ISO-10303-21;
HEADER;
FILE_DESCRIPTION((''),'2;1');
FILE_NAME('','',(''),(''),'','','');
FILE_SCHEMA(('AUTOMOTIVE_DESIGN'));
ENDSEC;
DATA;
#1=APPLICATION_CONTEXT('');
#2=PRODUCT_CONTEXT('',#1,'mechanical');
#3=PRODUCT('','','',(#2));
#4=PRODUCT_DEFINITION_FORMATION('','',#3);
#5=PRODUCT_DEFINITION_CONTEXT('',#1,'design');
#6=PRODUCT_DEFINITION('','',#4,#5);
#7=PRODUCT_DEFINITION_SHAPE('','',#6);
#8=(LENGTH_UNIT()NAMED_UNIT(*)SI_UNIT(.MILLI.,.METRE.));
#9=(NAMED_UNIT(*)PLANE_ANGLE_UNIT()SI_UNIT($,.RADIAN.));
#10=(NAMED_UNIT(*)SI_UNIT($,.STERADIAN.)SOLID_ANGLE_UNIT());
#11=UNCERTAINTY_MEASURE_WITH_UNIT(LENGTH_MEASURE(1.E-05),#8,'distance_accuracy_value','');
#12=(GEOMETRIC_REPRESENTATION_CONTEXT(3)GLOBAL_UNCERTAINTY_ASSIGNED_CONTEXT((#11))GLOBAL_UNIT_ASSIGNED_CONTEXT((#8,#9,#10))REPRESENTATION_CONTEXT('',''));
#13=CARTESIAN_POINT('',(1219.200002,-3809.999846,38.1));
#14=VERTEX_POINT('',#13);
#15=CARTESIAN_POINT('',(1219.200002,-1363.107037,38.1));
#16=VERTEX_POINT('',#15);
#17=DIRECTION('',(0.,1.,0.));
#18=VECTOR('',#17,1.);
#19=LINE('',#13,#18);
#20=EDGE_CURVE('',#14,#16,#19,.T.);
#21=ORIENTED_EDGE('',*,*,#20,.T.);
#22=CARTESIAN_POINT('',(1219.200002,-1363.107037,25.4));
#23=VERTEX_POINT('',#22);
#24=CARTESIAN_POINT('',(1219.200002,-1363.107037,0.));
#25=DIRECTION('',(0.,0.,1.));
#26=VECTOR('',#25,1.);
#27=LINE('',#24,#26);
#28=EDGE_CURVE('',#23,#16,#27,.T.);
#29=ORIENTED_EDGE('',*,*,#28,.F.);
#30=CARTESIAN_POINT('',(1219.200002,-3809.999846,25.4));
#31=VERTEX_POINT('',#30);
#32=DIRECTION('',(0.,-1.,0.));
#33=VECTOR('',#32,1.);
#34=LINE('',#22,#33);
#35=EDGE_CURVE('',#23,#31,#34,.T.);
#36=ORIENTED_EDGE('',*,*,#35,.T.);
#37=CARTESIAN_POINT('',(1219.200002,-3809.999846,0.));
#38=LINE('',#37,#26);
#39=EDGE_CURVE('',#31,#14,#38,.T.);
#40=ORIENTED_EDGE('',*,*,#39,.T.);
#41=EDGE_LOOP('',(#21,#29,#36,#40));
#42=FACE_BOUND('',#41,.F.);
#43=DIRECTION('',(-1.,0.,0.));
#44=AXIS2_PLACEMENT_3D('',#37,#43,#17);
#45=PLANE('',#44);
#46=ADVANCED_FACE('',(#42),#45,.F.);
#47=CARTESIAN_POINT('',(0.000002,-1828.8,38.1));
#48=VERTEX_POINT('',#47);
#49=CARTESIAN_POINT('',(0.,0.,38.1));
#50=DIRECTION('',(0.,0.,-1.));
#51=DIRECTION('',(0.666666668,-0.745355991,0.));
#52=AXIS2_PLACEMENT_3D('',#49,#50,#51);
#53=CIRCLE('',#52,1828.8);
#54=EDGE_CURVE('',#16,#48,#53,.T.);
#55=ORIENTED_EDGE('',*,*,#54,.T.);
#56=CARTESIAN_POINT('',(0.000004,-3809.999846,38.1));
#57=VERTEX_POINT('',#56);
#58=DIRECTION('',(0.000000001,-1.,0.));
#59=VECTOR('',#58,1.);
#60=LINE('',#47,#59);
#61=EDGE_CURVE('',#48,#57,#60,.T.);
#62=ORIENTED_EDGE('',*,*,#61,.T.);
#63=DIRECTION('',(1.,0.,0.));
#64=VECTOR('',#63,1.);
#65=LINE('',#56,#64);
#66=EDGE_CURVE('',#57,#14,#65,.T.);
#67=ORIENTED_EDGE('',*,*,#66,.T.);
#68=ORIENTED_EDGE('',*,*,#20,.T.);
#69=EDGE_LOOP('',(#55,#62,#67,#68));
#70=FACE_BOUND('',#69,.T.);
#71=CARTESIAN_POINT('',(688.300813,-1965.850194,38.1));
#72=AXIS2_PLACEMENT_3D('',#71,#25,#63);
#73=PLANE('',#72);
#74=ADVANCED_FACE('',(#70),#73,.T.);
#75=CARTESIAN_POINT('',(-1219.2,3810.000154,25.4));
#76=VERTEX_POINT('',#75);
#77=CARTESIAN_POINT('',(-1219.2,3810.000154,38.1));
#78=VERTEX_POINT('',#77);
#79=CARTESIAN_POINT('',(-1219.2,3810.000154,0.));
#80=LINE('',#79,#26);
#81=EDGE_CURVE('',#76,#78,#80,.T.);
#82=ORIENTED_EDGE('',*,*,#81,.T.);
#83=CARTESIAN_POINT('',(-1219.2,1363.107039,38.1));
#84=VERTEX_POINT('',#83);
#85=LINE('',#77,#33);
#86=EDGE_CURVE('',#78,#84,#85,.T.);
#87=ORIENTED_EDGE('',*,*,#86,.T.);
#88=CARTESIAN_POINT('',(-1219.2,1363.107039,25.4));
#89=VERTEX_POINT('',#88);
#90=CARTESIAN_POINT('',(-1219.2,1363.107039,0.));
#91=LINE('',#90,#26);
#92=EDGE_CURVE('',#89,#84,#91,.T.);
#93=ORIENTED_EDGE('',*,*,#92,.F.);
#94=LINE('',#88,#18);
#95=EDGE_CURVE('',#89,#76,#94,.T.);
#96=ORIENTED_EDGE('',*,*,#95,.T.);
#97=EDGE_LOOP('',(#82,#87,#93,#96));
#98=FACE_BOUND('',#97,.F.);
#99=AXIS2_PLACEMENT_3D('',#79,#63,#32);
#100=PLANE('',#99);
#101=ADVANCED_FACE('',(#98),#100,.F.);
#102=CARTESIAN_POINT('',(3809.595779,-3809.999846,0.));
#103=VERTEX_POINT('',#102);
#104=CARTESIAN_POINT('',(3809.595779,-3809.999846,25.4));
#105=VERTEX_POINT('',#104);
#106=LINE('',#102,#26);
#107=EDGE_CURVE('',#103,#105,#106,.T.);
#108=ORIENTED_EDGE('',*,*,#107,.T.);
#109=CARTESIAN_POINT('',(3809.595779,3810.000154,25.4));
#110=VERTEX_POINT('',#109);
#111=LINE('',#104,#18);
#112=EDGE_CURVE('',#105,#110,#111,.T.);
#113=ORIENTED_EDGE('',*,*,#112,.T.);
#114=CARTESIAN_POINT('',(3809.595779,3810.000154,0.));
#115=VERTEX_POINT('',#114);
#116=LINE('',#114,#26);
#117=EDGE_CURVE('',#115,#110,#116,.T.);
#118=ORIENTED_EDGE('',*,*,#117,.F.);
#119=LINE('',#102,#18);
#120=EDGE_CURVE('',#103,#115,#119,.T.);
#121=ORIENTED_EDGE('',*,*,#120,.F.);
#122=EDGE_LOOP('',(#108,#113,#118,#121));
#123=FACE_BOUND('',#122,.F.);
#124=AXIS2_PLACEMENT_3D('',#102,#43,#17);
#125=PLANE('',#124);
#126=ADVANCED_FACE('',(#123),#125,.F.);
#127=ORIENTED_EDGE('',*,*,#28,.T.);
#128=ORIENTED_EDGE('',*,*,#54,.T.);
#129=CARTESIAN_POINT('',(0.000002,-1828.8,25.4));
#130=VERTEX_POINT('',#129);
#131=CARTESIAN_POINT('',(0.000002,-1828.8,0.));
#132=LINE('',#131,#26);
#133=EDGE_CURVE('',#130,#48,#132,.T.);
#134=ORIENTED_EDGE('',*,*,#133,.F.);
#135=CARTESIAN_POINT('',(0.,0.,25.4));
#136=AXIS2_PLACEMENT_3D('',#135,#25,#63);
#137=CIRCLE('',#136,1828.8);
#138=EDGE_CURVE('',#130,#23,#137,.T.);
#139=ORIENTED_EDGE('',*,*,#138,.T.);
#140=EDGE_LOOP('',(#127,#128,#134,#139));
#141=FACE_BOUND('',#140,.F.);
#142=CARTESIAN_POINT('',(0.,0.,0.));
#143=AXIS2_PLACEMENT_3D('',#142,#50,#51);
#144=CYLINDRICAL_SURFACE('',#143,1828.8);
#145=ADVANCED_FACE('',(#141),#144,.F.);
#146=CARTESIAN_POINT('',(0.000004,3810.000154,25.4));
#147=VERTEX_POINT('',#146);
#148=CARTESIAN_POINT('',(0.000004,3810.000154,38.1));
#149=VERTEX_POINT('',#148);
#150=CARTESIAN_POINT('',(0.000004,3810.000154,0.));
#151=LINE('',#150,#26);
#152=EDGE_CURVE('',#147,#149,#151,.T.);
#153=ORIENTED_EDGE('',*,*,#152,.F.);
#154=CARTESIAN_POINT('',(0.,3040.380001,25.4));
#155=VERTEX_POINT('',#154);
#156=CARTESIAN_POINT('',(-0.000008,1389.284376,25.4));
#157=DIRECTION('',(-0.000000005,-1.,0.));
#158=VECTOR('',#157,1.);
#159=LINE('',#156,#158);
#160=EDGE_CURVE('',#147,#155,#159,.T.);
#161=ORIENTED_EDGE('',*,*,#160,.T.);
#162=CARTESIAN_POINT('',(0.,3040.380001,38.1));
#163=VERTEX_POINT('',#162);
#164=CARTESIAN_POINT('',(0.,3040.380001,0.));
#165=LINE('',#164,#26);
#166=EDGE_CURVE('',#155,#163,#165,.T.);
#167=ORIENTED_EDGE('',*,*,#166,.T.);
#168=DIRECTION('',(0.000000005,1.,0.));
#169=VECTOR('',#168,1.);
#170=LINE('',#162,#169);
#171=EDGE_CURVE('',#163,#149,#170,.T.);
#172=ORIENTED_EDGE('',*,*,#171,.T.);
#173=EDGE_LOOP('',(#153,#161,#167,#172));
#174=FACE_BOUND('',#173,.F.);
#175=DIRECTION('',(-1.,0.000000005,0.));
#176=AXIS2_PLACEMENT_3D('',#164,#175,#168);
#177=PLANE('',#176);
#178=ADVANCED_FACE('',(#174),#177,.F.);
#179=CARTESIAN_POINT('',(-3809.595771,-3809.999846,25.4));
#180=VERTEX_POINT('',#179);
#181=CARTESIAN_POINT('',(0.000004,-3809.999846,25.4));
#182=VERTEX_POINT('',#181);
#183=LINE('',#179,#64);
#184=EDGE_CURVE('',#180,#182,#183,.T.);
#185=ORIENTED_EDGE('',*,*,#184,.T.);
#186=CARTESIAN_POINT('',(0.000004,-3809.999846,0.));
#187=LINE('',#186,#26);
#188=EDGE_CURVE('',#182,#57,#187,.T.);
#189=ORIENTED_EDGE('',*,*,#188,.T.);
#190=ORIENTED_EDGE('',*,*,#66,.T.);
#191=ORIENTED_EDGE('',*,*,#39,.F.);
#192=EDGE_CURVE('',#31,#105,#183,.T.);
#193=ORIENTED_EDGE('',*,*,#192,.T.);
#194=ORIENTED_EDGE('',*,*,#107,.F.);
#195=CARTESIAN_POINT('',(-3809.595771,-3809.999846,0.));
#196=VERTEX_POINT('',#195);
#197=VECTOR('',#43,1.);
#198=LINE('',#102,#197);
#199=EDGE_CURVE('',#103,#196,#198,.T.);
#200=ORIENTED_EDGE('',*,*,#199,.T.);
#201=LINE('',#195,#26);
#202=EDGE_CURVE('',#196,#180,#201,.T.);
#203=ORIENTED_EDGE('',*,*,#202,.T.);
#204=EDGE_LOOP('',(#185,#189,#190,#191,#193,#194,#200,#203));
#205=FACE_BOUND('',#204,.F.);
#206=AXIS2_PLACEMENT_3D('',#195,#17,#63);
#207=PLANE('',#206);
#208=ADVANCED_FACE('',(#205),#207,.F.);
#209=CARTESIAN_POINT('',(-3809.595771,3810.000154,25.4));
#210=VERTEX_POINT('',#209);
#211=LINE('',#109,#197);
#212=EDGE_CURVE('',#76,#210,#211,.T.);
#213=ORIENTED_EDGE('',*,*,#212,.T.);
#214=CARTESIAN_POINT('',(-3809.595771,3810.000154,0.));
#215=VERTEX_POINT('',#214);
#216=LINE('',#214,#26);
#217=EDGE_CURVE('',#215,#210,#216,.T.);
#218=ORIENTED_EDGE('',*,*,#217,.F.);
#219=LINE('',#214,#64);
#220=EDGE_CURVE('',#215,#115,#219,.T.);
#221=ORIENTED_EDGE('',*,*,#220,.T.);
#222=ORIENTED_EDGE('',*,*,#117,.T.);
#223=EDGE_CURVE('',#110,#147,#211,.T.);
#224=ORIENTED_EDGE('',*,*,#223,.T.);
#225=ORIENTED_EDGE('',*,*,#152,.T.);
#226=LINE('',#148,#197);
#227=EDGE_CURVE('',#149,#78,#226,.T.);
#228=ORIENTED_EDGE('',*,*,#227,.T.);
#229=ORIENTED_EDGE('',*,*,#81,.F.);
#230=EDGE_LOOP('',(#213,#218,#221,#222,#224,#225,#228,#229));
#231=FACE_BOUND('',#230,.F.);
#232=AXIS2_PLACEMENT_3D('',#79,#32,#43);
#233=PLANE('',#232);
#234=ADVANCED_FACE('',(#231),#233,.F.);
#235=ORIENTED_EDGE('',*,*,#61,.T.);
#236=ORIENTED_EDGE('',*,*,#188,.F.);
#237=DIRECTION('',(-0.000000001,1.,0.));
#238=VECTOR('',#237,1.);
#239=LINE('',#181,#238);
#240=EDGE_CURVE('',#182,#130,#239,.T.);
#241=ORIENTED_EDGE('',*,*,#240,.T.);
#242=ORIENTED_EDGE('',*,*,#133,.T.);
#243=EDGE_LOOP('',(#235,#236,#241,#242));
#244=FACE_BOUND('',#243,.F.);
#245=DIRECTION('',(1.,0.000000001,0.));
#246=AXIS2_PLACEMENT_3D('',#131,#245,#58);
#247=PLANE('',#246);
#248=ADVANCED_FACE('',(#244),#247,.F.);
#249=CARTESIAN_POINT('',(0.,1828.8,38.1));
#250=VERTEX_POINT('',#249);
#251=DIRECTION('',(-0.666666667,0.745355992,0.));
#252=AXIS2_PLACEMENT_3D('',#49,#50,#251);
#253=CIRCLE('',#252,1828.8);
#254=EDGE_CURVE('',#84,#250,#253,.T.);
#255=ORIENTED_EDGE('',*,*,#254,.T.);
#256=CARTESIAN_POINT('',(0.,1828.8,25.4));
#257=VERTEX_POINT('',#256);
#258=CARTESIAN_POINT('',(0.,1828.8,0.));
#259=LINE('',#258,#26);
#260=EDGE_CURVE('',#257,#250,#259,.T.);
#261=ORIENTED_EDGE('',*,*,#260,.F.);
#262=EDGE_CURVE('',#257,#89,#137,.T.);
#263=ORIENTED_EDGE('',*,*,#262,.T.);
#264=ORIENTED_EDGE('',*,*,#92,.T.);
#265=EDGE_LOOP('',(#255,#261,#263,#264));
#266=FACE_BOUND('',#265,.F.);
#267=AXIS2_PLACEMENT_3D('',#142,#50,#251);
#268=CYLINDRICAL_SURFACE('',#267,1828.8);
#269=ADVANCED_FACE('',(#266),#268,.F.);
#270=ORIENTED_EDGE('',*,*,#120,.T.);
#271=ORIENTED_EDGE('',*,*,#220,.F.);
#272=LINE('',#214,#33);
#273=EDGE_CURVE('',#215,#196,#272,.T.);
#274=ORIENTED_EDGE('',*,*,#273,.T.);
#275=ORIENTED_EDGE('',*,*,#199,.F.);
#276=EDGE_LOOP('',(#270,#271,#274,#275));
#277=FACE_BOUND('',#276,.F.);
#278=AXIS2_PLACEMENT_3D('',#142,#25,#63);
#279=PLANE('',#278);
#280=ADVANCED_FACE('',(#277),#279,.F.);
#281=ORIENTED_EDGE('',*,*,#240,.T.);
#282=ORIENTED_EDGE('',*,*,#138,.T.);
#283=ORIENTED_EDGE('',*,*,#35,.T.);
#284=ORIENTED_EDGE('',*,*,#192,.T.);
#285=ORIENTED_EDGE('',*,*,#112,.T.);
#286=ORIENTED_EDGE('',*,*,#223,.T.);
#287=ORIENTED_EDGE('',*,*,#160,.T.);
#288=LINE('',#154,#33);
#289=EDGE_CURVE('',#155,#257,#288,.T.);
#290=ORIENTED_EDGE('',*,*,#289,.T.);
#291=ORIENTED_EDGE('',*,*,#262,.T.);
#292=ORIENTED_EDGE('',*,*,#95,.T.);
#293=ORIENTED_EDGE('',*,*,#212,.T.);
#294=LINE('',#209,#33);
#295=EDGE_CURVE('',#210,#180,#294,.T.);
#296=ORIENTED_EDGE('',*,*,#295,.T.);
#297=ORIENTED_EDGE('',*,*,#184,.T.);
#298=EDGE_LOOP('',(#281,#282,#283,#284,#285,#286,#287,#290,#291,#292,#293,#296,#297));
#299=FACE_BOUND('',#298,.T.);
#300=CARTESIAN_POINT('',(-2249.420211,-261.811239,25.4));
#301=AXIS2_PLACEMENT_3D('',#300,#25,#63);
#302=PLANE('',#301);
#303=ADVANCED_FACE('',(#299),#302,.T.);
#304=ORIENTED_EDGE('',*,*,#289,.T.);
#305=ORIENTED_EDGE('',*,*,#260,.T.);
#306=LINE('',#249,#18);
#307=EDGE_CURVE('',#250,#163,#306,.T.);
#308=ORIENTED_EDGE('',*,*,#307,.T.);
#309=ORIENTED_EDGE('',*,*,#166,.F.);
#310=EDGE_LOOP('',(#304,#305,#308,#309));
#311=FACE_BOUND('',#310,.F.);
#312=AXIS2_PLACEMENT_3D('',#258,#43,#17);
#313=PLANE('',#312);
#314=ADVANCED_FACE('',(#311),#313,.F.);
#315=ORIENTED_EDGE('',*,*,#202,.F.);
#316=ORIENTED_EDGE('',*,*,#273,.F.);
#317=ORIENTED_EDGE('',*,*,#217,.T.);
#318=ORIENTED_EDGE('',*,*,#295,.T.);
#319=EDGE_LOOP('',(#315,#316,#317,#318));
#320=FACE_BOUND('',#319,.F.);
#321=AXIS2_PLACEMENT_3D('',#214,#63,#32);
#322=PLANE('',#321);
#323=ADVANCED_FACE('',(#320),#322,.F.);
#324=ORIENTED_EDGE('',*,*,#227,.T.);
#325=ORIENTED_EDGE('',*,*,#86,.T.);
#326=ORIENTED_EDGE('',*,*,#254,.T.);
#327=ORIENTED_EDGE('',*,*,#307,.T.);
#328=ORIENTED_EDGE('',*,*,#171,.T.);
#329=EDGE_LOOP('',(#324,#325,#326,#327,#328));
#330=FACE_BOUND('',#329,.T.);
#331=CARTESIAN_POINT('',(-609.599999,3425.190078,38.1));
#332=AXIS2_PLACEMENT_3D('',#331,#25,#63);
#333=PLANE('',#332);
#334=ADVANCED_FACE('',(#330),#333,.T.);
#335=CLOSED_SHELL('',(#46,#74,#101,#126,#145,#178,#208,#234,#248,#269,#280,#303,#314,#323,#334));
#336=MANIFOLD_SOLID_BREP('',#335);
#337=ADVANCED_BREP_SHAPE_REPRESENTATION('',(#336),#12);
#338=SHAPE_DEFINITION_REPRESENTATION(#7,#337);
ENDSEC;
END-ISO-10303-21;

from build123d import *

# Parameters (mm, degrees)
F0_R     = 1790.7
F1_DEPTH = 25.4
F3_DEPTH = 25.4
F4_DEPTH = 25.4
F5_DEPTH = 38.1


# Not quite as in the source:
# - the program builds the solid bodies; features that only make, move or delete a surface that nothing else refers to are left out


with BuildPart() as f1:
    # F0 (on Top) → F1 (new body)
    with BuildSketch(Plane.XY):
        with BuildLine():
            Line((-1219.2, 3810.0001542995), (-3809.5957711624, 3810.0001542995))
            Line((-3809.5957711624, 3810.0001542995), (-3809.5957711624, -3809.9998457005))
            Line((-3809.5957711624, -3809.9998457005), (3.7253e-06, -3809.9998457005))
            Line((3.7253e-06, -3809.9998457005), (3.0473e-06, -3116.5800094754))
            Line((3.0473e-06, -3116.5800094754), (2.2873e-06, -2339.3399715424))
            Line((2.2873e-06, -2339.3399715424), (1.7881e-06, -1828.8))
            ThreePointArc((1.7881e-06, -1828.8), (-1708.414409752, -652.5562386122), (-1219.2, 1363.1070390839))
            Line((-1219.2, 1363.1070390839), (-1219.2, 2247.9000093898))
            Line((-1219.2, 2247.9000093898), (-1219.2, 3040.3800010681))
            Line((-1219.2, 3040.3800010681), (-1219.2, 3810.0001542995))
        make_face()
        with BuildLine():
            Line((3809.595778613, 3810.0001542995), (3.7253e-06, 3810.0001542995))
            Line((3.7253e-06, 3810.0001542995), (0, 3040.3800010681))
            Line((0, 3040.3800010681), (0, 2247.9000081977))
            Line((0, 2247.9000081977), (0, 1828.8))
            ThreePointArc((0, 1828.8), (1293.156881434, 1293.156881434), (1828.8, 0))
            ThreePointArc((1828.8, 0), (1669.4583559266, -746.6044721449), (1219.2000023767, -1363.1070369581))
            Line((1219.2000023767, -1363.1070369581), (1219.2000023767, -2339.3399703503))
            Line((1219.2000023767, -2339.3399703503), (1219.2000023767, -3116.5800082833))
            Line((1219.2000023767, -3116.5800082833), (1219.2000023767, -3809.9998457005))
            Line((1219.2000023767, -3809.9998457005), (3809.595778613, -3809.9998457005))
            Line((3809.595778613, -3809.9998457005), (3809.595778613, 3810.0001542995))
        make_face()
        with BuildLine():
            ThreePointArc((0, 1828.8), (-652.556237777, 1708.414410071), (-1219.2, 1363.1070390839))
            ThreePointArc((-1219.2, 1363.1070390839), (-1708.414409752, -652.5562386122), (1.7881e-06, -1828.8))
            ThreePointArc((1.7881e-06, -1828.8), (652.5562401017, -1708.4144091831), (1219.2000023767, -1363.1070369581))
            ThreePointArc((1219.2000023767, -1363.1070369581), (1669.4583559266, -746.6044721449), (1828.8, 0))
            ThreePointArc((1828.8, 0), (1293.156881434, 1293.156881434), (0, 1828.8))
        make_face()
        Circle(F0_R, mode=Mode.SUBTRACT)
    extrude(amount=F1_DEPTH)

    # F0 (on Top) → F3 (join)
    with BuildSketch(Plane.XY):
        with BuildLine():
            Line((-1219.2, 3810.0001542995), (-3809.5957711624, 3810.0001542995))
            Line((-3809.5957711624, 3810.0001542995), (-3809.5957711624, -3809.9998457005))
            Line((-3809.5957711624, -3809.9998457005), (3.7253e-06, -3809.9998457005))
            Line((3.7253e-06, -3809.9998457005), (3.0473e-06, -3116.5800094754))
            Line((3.0473e-06, -3116.5800094754), (2.2873e-06, -2339.3399715424))
            Line((2.2873e-06, -2339.3399715424), (1.7881e-06, -1828.8))
            ThreePointArc((1.7881e-06, -1828.8), (-1708.414409752, -652.5562386122), (-1219.2, 1363.1070390839))
            Line((-1219.2, 1363.1070390839), (-1219.2, 2247.9000093898))
            Line((-1219.2, 2247.9000093898), (-1219.2, 3040.3800010681))
            Line((-1219.2, 3040.3800010681), (-1219.2, 3810.0001542995))
        make_face()
        Polygon((3.7253e-06, 3810.0001542995), (-1219.2, 3810.0001542995), (-1219.2, 3040.3800010681), (0, 3040.3800010681), align=None)
        with BuildLine():
            Line((3809.595778613, 3810.0001542995), (3.7253e-06, 3810.0001542995))
            Line((3.7253e-06, 3810.0001542995), (0, 3040.3800010681))
            Line((0, 3040.3800010681), (0, 2247.9000081977))
            Line((0, 2247.9000081977), (0, 1828.8))
            ThreePointArc((0, 1828.8), (1293.156881434, 1293.156881434), (1828.8, 0))
            ThreePointArc((1828.8, 0), (1669.4583559266, -746.6044721449), (1219.2000023767, -1363.1070369581))
            Line((1219.2000023767, -1363.1070369581), (1219.2000023767, -2339.3399703503))
            Line((1219.2000023767, -2339.3399703503), (1219.2000023767, -3116.5800082833))
            Line((1219.2000023767, -3116.5800082833), (1219.2000023767, -3809.9998457005))
            Line((1219.2000023767, -3809.9998457005), (3809.595778613, -3809.9998457005))
            Line((3809.595778613, -3809.9998457005), (3809.595778613, 3810.0001542995))
        make_face()
        Polygon((3.0473e-06, -3116.5800094754), (3.7253e-06, -3809.9998457005), (1219.2000023767, -3809.9998457005), (1219.2000023767, -3116.5800082833), align=None)
    extrude(amount=F3_DEPTH)

    # F0 (on Top) → F4 (join)
    with BuildSketch(Plane.XY):
        Circle(F0_R)
    extrude(amount=F4_DEPTH)

    # F0 (on Top) → F5 (join)
    with BuildSketch(Plane.XY):
        Polygon((3.7253e-06, 3810.0001542995), (-1219.2, 3810.0001542995), (-1219.2, 3040.3800010681), (0, 3040.3800010681), align=None)
        with BuildLine():
            Line((0, 2247.9000081977), (-1219.2, 2247.9000093898))
            Line((-1219.2, 2247.9000093898), (-1219.2, 1363.1070390839))
            ThreePointArc((-1219.2, 1363.1070390839), (-652.556237777, 1708.414410071), (0, 1828.8))
            Line((0, 1828.8), (0, 2247.9000081977))
        make_face()
        Polygon((0, 3040.3800010681), (-1219.2, 3040.3800010681), (-1219.2, 2247.9000093898), (0, 2247.9000081977), align=None)
        with BuildLine():
            Line((1.7881e-06, -1828.8), (2.2873e-06, -2339.3399715424))
            Line((2.2873e-06, -2339.3399715424), (1219.2000023767, -2339.3399703503))
            Line((1219.2000023767, -2339.3399703503), (1219.2000023767, -1363.1070369581))
            ThreePointArc((1219.2000023767, -1363.1070369581), (652.5562401017, -1708.4144091831), (1.7881e-06, -1828.8))
        make_face()
        Polygon((2.2873e-06, -2339.3399715424), (3.0473e-06, -3116.5800094754), (1219.2000023767, -3116.5800082833), (1219.2000023767, -2339.3399703503), align=None)
        Polygon((3.0473e-06, -3116.5800094754), (3.7253e-06, -3809.9998457005), (1219.2000023767, -3809.9998457005), (1219.2000023767, -3116.5800082833), align=None)
    extrude(amount=F5_DEPTH)


solid = f1.part
